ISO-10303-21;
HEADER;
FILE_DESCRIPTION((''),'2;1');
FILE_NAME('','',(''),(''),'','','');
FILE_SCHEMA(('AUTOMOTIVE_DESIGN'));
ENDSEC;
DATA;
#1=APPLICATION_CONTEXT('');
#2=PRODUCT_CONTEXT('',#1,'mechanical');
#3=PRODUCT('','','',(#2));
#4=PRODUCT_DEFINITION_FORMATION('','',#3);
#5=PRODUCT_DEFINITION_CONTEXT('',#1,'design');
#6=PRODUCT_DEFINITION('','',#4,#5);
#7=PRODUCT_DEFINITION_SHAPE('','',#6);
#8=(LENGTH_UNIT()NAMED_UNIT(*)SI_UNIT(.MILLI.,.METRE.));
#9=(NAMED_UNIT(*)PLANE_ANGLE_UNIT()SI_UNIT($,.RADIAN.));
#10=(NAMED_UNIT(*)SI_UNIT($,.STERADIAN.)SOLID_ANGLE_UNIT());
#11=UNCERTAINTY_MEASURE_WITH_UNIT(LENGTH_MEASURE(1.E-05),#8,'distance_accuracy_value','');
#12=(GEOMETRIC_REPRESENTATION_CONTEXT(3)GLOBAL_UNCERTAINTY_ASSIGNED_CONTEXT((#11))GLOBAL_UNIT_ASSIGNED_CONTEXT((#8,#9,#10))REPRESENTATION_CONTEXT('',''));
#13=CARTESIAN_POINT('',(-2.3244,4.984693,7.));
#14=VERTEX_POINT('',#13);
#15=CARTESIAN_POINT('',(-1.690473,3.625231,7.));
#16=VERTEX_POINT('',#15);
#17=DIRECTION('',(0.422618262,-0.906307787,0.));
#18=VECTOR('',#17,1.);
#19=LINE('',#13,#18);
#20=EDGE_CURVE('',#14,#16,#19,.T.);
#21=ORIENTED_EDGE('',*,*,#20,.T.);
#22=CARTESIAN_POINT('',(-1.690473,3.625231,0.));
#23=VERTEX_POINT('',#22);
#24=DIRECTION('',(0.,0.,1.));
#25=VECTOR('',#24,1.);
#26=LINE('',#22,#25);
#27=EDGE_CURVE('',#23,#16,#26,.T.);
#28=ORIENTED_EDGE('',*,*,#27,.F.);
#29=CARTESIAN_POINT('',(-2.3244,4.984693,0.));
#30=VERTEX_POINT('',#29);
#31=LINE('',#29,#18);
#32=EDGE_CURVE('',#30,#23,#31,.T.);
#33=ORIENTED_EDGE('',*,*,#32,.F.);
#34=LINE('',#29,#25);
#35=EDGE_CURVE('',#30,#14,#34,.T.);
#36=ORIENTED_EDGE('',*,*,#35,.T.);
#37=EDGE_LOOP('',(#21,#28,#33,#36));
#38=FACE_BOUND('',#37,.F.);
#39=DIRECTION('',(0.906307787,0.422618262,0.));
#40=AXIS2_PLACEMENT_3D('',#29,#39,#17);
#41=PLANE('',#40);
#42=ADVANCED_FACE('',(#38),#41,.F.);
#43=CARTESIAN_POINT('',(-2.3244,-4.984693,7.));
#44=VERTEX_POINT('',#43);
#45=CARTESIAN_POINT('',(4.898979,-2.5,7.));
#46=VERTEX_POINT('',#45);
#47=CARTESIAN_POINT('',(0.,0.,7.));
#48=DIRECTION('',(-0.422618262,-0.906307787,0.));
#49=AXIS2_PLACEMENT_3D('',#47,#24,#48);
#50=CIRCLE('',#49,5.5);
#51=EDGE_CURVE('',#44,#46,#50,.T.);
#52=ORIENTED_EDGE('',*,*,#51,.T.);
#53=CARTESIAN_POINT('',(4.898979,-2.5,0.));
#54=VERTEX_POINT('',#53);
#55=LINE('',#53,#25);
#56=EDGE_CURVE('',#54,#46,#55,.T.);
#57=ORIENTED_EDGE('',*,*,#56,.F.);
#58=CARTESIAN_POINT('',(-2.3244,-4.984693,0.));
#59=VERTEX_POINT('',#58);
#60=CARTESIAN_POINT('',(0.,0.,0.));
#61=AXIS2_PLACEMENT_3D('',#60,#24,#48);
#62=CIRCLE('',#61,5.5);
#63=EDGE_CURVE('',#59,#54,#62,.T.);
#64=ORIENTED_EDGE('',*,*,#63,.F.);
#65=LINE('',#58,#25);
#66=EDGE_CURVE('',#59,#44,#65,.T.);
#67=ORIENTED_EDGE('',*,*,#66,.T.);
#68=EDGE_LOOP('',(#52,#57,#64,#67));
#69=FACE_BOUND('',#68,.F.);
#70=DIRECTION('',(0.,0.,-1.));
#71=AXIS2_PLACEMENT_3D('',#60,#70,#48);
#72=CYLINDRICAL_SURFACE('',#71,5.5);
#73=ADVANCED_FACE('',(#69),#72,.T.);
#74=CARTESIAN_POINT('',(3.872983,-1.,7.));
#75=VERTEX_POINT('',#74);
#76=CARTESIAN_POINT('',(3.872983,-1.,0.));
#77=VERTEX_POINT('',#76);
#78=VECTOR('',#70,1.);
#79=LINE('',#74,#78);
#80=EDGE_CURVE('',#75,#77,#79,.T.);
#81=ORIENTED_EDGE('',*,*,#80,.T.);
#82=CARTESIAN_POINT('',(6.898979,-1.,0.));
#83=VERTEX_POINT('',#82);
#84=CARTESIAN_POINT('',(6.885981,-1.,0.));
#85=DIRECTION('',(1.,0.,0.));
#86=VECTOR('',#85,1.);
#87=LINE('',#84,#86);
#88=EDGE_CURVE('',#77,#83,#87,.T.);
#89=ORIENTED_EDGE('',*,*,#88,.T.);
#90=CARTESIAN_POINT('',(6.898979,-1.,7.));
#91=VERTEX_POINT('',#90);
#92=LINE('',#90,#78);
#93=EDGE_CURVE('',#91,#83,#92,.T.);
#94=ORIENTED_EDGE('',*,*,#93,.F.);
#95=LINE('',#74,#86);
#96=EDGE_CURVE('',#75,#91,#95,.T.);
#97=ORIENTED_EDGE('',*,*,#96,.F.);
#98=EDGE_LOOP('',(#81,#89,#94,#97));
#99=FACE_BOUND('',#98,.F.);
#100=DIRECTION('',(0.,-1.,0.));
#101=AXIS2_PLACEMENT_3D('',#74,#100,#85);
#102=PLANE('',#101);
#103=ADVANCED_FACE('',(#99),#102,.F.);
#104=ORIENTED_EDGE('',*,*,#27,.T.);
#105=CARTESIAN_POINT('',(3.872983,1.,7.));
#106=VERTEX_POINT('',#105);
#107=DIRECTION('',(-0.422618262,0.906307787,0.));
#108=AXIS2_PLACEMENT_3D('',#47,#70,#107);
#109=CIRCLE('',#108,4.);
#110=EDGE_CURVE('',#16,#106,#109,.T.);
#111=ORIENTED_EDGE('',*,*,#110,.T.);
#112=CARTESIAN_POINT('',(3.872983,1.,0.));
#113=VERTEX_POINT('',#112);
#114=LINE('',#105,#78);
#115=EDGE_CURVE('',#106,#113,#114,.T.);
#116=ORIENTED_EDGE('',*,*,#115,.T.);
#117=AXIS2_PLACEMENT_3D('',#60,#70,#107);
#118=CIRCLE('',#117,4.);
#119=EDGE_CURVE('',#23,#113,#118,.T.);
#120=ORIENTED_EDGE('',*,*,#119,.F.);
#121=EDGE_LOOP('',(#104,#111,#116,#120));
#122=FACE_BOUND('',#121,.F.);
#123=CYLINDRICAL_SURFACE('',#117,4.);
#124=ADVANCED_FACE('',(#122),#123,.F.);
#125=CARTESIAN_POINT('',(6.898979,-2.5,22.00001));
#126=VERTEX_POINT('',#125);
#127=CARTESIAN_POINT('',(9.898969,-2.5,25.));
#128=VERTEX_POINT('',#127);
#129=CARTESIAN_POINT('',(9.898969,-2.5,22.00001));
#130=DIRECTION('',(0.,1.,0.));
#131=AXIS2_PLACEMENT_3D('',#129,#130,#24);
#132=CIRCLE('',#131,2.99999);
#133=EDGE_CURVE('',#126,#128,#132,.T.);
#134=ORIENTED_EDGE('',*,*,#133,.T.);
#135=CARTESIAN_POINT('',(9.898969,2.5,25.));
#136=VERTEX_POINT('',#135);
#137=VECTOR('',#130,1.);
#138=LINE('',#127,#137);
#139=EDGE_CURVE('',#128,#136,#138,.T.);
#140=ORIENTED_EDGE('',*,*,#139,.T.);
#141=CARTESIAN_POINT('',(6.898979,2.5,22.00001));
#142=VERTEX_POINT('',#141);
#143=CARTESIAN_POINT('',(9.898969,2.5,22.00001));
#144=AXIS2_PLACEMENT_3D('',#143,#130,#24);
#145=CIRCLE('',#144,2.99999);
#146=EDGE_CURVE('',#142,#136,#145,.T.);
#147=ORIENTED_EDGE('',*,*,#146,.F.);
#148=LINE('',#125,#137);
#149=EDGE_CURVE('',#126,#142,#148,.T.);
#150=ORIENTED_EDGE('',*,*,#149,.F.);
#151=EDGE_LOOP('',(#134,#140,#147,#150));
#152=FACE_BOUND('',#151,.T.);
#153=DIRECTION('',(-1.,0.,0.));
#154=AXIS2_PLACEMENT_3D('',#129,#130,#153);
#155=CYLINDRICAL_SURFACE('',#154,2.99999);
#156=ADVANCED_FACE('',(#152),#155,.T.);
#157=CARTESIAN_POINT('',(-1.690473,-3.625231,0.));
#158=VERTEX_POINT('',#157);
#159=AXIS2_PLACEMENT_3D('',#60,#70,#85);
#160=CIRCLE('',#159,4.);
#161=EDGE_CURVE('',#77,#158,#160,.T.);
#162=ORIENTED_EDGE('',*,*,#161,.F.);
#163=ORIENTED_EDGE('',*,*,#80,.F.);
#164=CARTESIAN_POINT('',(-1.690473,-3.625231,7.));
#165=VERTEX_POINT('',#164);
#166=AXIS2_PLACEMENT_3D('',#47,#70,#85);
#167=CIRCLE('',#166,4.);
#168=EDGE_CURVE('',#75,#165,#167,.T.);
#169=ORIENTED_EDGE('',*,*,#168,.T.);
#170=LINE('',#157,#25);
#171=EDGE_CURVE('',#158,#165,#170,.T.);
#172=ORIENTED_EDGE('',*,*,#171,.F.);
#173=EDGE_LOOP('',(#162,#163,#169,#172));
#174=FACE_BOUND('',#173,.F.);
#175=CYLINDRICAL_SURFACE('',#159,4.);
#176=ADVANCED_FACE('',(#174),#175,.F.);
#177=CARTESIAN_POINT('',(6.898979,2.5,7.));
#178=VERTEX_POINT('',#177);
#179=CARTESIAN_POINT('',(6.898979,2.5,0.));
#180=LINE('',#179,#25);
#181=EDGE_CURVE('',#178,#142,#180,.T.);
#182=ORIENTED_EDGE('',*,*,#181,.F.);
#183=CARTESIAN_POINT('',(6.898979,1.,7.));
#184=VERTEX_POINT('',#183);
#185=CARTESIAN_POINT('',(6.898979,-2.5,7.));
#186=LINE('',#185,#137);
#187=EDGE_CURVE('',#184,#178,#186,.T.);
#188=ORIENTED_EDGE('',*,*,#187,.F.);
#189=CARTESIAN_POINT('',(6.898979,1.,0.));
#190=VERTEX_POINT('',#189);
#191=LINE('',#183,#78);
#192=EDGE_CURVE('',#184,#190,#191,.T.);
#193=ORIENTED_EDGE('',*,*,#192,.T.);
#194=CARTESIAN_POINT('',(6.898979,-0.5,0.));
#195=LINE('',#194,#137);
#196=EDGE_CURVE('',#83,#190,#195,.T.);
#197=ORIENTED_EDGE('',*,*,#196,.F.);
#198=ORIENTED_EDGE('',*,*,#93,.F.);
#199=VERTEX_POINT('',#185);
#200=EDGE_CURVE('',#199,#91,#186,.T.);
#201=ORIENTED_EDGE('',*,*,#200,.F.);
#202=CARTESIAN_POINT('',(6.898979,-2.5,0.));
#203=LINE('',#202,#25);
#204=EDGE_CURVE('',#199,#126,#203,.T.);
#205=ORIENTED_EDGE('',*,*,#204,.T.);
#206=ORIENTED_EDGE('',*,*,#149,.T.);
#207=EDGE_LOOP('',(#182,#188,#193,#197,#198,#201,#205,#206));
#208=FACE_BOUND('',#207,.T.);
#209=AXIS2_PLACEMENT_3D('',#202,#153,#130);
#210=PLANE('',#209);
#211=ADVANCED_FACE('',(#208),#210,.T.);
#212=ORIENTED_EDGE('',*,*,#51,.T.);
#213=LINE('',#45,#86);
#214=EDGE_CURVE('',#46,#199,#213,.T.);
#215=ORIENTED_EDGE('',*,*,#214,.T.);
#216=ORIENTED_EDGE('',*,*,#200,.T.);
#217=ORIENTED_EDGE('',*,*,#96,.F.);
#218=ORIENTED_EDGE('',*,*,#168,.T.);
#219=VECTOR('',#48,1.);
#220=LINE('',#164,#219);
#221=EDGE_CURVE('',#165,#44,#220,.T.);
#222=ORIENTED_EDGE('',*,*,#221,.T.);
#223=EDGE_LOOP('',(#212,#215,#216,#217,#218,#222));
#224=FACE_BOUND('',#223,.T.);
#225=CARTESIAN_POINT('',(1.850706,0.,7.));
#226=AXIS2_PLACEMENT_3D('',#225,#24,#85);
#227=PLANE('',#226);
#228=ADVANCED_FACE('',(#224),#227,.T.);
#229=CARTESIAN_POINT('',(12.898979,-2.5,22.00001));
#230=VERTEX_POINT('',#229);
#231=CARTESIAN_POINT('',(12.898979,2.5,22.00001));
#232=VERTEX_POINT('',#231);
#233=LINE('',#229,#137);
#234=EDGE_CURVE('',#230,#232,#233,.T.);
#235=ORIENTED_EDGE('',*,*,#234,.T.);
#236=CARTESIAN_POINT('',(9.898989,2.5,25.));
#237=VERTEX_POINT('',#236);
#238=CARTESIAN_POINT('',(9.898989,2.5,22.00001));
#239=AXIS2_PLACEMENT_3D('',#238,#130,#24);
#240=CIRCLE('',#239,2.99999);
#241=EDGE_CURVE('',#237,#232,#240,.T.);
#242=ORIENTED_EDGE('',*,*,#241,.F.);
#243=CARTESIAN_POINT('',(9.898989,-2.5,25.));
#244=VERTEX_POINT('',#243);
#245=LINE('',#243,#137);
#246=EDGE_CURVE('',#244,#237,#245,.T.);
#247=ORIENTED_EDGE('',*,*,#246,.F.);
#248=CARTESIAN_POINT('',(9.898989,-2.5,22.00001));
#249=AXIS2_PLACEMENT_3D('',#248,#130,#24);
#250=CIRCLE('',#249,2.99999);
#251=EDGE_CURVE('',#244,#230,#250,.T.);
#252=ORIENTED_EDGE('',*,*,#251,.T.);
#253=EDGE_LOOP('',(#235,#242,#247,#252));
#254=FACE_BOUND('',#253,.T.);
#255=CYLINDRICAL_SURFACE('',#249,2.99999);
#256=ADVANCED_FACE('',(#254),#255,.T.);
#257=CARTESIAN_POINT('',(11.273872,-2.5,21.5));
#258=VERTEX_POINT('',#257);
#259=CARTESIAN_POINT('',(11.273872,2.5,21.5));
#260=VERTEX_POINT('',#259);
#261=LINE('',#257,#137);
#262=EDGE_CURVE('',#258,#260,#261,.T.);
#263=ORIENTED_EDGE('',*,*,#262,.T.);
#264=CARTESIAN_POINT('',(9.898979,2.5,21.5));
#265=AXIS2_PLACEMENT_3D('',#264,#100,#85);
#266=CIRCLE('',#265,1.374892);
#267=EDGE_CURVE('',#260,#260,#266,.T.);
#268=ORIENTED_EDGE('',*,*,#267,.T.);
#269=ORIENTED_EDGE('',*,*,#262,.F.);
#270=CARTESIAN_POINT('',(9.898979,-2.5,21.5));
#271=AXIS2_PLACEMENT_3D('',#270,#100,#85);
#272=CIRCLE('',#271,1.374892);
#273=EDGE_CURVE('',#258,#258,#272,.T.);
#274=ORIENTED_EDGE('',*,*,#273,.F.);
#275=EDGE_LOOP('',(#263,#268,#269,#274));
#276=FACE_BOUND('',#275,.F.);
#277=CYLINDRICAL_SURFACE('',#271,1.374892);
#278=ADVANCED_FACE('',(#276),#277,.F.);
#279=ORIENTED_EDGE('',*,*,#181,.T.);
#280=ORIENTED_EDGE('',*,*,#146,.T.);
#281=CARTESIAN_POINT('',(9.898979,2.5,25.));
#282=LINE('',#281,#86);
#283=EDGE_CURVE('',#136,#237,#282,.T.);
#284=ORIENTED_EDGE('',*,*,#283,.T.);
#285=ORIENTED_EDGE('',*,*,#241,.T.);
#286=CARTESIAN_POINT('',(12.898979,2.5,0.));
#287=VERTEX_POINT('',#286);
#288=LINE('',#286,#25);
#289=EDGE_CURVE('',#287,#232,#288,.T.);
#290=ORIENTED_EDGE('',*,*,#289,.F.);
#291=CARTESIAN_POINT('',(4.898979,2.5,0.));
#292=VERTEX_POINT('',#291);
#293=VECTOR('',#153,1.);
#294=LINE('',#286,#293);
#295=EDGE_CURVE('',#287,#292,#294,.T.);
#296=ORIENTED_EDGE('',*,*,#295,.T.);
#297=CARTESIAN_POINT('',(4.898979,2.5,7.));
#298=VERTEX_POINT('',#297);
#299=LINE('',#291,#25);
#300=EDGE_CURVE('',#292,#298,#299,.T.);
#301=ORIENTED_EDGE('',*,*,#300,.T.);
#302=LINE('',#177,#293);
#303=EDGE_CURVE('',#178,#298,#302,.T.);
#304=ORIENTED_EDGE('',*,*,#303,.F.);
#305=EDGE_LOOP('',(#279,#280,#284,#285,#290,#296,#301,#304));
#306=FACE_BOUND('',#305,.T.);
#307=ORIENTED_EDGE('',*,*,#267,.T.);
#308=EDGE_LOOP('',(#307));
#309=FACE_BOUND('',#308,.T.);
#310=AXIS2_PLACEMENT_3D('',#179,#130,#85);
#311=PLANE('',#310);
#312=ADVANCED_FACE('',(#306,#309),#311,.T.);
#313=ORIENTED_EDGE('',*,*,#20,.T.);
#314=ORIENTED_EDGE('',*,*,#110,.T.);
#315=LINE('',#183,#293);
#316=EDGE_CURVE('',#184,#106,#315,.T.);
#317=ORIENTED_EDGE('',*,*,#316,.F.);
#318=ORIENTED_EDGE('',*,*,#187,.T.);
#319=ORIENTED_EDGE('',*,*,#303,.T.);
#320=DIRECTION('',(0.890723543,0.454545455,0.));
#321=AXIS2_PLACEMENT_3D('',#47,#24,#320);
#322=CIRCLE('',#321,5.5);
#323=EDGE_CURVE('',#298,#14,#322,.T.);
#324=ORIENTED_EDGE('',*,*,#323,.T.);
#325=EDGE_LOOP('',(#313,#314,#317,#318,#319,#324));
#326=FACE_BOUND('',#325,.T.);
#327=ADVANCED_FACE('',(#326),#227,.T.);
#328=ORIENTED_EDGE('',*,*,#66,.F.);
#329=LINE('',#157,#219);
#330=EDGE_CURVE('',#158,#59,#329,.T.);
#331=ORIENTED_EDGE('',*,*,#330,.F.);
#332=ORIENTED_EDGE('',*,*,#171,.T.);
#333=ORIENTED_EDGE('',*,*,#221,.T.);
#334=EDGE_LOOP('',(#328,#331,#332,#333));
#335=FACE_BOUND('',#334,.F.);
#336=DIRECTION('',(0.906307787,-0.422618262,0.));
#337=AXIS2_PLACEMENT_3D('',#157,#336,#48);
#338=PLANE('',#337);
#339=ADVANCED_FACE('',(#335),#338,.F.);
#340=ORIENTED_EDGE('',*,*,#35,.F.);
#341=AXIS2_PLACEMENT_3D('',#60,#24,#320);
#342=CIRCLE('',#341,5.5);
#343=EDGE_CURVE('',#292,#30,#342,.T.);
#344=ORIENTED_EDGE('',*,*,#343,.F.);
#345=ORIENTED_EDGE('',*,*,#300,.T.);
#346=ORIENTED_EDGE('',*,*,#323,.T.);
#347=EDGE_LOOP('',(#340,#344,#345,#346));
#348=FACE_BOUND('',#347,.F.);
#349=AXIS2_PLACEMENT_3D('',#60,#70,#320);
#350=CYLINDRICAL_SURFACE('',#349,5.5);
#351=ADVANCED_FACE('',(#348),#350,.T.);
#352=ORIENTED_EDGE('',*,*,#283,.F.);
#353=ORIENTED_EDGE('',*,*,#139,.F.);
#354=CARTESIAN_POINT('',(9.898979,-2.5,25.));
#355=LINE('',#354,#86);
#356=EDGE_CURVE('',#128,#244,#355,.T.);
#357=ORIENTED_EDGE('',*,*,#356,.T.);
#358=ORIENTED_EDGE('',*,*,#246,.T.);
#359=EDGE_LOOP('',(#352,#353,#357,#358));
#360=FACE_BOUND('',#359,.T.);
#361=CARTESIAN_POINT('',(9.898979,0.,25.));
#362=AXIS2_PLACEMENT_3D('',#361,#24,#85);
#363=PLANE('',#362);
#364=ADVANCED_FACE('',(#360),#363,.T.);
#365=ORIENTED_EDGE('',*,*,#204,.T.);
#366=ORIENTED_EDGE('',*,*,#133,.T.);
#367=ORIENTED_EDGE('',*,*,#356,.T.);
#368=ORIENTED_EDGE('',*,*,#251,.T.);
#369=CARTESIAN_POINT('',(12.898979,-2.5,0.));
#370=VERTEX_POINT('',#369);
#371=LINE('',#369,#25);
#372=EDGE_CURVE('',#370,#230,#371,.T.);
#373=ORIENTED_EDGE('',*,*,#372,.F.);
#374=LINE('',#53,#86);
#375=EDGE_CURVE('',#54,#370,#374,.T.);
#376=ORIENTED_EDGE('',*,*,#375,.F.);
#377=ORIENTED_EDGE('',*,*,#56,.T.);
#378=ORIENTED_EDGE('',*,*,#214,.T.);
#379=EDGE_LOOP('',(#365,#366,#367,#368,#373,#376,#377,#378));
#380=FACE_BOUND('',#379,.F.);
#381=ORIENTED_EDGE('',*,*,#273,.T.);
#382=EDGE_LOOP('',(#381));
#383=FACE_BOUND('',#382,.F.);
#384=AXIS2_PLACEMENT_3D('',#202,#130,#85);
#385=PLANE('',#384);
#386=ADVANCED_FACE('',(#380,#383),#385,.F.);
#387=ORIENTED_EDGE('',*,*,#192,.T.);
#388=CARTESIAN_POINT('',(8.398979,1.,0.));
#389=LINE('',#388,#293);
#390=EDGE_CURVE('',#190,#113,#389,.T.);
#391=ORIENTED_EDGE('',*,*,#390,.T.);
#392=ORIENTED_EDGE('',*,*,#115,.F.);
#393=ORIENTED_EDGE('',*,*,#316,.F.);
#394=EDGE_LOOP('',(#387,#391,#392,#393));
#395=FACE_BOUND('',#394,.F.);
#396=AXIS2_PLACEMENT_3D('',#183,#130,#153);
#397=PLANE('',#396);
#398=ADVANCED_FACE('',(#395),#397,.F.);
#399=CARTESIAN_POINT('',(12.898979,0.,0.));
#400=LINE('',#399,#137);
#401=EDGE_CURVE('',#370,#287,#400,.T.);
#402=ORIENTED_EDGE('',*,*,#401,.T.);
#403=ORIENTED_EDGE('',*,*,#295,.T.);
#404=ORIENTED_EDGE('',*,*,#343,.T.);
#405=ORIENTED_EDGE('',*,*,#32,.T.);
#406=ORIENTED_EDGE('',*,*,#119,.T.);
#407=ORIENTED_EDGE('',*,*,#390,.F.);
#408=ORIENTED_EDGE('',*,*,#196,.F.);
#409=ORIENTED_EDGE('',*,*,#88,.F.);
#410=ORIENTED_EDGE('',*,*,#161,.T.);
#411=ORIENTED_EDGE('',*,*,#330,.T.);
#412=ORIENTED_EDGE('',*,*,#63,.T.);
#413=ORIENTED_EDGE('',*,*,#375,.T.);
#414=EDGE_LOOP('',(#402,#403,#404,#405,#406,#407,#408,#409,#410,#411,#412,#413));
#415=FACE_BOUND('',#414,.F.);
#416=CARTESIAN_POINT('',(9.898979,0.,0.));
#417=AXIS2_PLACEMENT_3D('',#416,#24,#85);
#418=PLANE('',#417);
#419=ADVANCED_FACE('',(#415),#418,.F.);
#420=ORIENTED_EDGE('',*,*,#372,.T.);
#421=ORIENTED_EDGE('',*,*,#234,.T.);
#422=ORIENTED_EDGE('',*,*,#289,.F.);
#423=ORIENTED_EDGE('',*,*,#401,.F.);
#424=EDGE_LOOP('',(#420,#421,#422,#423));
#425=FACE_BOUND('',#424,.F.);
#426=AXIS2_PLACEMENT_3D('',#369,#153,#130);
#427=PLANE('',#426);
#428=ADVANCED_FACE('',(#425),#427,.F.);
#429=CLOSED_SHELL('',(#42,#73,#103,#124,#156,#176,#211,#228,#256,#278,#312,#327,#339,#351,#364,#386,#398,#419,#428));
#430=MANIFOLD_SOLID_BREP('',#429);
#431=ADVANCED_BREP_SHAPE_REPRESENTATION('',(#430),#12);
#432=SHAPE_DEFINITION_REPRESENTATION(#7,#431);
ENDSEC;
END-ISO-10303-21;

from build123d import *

# Parameters (mm, degrees)
F1_DEPTH = 7
F0_W     = 6
F0_H     = 5
F2_DEPTH = 25
F3_R     = 1.3748922144
F4_DEPTH = 25
F5_R     = 2.99999
F7_DEPTH = 25


# Not quite as in the source:
# - a fillet or chamfer is up to 0.001 mm smaller than in the source, because OpenCascade refuses the exact size


with BuildPart() as f1:
    # F0 (on Top) → F1 (new body)
    with BuildSketch(Plane.XY):
        with BuildLine():
            ThreePointArc((-1.690473047, 3.6252311481), (2.1491984334, 3.3735657833), (4, 0))
            ThreePointArc((4, 0), (2.1491984334, -3.3735657833), (-1.690473047, -3.6252311481))
            Line((-1.690473047, -3.6252311481), (-2.3244004396, -4.9846928287))
            ThreePointArc((-2.3244004396, -4.9846928287), (1.789005011, -5.2009096388), (4.8989794856, -2.5))
            ThreePointArc((4.8989794856, -2.5), (5.3476343915, -1.2856151892), (5.5, 0))
            ThreePointArc((5.5, 0), (5.3476343915, 1.2856151892), (4.8989794856, 2.5))
            ThreePointArc((4.8989794856, 2.5), (1.789005011, 5.2009096388), (-2.3244004396, 4.9846928287))
            Line((-2.3244004396, 4.9846928287), (-1.690473047, 3.6252311481))
        make_face()
        with BuildLine():
            Line((6.8989794856, 2.5), (4.8989794856, 2.5))
            ThreePointArc((4.8989794856, 2.5), (5.3476343915, 1.2856151892), (5.5, 0))
            ThreePointArc((5.5, 0), (5.3476343915, -1.2856151892), (4.8989794856, -2.5))
            Line((4.8989794856, -2.5), (6.8989794856, -2.5))
            Line((6.8989794856, -2.5), (6.8989794856, 2.5))
        make_face()
    extrude(amount=F1_DEPTH)

    # F0 (on Top) → F2 (join)
    with BuildSketch(Plane.XY):
        with Locations((9.8989794856, 0)):
            Rectangle(F0_W, F0_H)
    extrude(amount=F2_DEPTH)

    # F3 (on face) → F4 (cut)
    with BuildSketch(Plane.XZ.offset(2.5)):
        with Locations((9.8989794856, 21.5)):
            Circle(F3_R)
    extrude(amount=-F4_DEPTH, mode=Mode.SUBTRACT)

    # F5 (radius 3 in the source; OpenCascade refuses exactly that, so slightly less here)
    f5_edges = [f1.edges().sort_by_distance(p)[0] for p in [
        (12.898979, 0, 25),
        (6.898979, 0, 25),
    ]]
    fillet(f5_edges, radius=F5_R)

    # F6 (on face) → F7 (cut)
    with BuildSketch(Plane.XY.offset(7)):
        with BuildLine():
            Line((3.8729833462, -1), (6.8989794856, -1))
            Line((6.8989794856, -1), (6.8989794856, 1))
            Line((6.8989794856, 1), (3.8729833462, 1))
            ThreePointArc((3.8729833462, 1), (4, 0), (3.8729833462, -1))
        make_face()
    extrude(amount=-F7_DEPTH, mode=Mode.SUBTRACT)


solid = f1.part
